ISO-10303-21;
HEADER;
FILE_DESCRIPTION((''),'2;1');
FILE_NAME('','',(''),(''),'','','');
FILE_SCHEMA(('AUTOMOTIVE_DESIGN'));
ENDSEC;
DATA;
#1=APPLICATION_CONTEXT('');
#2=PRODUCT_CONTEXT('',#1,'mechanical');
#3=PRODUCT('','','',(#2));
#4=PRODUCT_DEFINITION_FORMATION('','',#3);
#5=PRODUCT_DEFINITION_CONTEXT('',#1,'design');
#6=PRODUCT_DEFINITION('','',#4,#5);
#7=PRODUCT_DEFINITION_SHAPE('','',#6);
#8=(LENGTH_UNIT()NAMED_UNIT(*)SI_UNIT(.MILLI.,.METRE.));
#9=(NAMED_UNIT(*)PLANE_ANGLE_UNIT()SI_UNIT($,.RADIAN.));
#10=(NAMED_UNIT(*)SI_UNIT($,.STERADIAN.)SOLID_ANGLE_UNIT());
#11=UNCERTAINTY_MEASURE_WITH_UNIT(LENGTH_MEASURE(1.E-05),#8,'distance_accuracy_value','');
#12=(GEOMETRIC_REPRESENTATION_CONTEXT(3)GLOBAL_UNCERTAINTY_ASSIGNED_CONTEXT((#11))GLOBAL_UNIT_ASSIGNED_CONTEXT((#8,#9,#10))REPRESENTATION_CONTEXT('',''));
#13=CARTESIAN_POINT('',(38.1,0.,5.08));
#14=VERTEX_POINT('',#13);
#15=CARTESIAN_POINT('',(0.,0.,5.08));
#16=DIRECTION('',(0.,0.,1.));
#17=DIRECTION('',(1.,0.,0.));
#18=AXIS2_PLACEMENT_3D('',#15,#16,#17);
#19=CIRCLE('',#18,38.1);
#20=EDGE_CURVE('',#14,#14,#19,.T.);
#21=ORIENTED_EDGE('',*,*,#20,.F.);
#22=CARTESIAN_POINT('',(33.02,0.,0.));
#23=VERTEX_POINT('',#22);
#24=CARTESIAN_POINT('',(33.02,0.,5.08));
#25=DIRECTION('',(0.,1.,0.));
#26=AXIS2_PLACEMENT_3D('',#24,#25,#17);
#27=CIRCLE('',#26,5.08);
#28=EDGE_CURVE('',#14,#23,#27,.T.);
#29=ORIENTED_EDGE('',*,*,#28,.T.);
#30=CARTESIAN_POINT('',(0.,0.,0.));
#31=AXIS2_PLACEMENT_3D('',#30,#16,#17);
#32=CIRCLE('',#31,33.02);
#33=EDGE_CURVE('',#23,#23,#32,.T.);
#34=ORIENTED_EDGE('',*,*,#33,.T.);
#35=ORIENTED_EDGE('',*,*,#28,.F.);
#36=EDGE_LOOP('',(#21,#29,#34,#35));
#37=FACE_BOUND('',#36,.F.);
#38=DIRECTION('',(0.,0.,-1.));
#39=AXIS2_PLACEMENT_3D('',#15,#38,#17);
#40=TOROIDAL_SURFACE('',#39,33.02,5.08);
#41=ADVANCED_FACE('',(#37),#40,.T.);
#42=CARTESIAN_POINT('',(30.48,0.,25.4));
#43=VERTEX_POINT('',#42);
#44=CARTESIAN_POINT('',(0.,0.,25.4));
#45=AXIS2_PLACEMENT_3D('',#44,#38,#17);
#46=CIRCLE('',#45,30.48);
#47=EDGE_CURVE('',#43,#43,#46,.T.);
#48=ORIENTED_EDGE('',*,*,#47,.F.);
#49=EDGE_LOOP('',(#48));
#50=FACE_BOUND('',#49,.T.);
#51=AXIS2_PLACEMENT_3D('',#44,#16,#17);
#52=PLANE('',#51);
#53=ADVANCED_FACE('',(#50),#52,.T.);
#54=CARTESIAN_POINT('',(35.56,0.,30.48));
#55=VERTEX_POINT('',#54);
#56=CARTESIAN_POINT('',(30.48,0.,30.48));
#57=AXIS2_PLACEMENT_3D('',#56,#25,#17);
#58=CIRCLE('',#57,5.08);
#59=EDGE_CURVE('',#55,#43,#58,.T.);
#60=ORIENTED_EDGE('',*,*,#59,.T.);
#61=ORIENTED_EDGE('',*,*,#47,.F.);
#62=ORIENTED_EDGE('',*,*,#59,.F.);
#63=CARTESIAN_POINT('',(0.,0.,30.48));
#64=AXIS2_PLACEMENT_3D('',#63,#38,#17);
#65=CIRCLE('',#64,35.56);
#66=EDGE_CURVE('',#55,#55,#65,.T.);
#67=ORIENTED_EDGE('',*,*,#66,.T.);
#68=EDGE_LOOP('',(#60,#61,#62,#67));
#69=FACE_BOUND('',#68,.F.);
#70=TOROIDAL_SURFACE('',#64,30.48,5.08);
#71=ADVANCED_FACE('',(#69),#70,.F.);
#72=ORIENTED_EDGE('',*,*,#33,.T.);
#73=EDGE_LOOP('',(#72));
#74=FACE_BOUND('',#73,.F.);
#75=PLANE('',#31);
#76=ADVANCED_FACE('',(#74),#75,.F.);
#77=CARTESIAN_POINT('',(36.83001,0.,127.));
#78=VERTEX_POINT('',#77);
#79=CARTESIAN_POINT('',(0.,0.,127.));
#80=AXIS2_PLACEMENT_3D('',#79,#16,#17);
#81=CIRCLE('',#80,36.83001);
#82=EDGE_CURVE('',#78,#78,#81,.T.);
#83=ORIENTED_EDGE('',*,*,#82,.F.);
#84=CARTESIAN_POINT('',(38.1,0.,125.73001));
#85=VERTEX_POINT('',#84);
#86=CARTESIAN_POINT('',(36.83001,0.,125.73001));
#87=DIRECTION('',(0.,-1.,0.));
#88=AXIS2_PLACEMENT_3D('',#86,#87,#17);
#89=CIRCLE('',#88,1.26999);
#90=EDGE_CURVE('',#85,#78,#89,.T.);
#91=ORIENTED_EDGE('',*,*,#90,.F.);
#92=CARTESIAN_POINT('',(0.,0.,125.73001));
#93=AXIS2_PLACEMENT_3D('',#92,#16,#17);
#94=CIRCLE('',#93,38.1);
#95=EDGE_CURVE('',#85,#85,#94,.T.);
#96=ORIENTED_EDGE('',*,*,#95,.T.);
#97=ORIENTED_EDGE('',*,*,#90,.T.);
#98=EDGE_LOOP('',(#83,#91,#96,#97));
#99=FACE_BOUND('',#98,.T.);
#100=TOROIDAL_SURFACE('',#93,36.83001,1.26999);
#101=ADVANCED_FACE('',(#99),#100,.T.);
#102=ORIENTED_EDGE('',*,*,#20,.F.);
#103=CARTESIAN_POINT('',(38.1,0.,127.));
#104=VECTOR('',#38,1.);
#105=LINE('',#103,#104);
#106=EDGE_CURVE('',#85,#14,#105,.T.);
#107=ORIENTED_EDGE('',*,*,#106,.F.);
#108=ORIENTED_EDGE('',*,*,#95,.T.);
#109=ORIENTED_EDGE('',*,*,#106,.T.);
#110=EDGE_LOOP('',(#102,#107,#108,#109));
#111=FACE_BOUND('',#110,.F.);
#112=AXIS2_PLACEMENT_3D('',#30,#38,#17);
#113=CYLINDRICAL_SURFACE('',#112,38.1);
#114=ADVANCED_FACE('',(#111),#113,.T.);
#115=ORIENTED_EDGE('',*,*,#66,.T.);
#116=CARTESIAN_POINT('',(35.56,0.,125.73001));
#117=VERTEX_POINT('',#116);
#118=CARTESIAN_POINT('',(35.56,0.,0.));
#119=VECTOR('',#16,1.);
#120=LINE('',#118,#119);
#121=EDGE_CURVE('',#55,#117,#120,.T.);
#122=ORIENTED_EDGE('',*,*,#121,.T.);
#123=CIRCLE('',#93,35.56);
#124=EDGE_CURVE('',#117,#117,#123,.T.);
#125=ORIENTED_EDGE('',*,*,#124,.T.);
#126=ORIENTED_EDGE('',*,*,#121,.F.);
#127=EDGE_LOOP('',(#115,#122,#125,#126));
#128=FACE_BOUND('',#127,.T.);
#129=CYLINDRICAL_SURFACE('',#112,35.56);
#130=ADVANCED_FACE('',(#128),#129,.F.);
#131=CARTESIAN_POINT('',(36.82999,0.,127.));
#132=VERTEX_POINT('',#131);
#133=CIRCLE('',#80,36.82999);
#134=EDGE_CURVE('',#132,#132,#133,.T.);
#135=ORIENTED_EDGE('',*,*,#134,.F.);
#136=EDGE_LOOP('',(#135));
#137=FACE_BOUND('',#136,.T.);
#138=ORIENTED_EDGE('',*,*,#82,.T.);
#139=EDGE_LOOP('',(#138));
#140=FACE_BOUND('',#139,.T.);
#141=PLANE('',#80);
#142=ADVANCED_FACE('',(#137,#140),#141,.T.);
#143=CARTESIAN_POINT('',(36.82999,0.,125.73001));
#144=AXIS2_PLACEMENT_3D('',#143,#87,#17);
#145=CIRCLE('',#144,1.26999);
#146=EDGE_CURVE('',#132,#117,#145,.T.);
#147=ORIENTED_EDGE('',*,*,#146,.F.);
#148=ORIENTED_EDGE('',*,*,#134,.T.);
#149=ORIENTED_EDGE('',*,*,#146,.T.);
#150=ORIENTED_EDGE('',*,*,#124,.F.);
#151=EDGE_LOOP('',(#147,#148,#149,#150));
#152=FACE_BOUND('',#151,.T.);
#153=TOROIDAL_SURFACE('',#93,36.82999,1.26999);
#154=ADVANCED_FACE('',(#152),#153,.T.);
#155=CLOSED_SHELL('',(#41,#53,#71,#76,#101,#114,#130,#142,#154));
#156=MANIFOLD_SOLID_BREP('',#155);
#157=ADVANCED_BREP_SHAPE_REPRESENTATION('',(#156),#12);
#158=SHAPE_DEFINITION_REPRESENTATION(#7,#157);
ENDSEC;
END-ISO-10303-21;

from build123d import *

# Parameters (mm, degrees)
F0_R     = 38.1
F0_R_2   = 35.56
F1_DEPTH = 127
F2_R     = 38.1
F3_DEPTH = 25.4
F4_R     = 1.26999
F5_R     = 5.08
F6_R     = 5.08


# Not quite as in the source:
# - a fillet or chamfer is up to 0.001 mm smaller than in the source, because OpenCascade refuses the exact size


with BuildPart() as f1:
    # F0 (on Top) → F1 (new body)
    with BuildSketch(Plane.XY):
        Circle(F0_R)
        Circle(F0_R_2, mode=Mode.SUBTRACT)
    extrude(amount=F1_DEPTH)

    # F2 (on Top) → F3 (join)
    with BuildSketch(Plane.XY):
        Circle(F2_R)
    extrude(amount=F3_DEPTH)

    # F4 (radius 1.27 in the source; OpenCascade refuses exactly that, so slightly less here)
    f4_edges = [f1.edges().sort_by_distance(p)[0] for p in [
        (-38.1, 0, 127),
        (-35.56, 0, 127),
    ]]
    fillet(f4_edges, radius=F4_R)

    # F5
    f5_edges = [f1.edges().sort_by_distance(p)[0] for p in [
        (-38.1, 0, 0),
    ]]
    fillet(f5_edges, radius=F5_R)

    # F6
    f6_edges = [f1.edges().sort_by_distance(p)[0] for p in [
        (-35.56, 0, 25.4),
    ]]
    fillet(f6_edges, radius=F6_R)


solid = f1.part
